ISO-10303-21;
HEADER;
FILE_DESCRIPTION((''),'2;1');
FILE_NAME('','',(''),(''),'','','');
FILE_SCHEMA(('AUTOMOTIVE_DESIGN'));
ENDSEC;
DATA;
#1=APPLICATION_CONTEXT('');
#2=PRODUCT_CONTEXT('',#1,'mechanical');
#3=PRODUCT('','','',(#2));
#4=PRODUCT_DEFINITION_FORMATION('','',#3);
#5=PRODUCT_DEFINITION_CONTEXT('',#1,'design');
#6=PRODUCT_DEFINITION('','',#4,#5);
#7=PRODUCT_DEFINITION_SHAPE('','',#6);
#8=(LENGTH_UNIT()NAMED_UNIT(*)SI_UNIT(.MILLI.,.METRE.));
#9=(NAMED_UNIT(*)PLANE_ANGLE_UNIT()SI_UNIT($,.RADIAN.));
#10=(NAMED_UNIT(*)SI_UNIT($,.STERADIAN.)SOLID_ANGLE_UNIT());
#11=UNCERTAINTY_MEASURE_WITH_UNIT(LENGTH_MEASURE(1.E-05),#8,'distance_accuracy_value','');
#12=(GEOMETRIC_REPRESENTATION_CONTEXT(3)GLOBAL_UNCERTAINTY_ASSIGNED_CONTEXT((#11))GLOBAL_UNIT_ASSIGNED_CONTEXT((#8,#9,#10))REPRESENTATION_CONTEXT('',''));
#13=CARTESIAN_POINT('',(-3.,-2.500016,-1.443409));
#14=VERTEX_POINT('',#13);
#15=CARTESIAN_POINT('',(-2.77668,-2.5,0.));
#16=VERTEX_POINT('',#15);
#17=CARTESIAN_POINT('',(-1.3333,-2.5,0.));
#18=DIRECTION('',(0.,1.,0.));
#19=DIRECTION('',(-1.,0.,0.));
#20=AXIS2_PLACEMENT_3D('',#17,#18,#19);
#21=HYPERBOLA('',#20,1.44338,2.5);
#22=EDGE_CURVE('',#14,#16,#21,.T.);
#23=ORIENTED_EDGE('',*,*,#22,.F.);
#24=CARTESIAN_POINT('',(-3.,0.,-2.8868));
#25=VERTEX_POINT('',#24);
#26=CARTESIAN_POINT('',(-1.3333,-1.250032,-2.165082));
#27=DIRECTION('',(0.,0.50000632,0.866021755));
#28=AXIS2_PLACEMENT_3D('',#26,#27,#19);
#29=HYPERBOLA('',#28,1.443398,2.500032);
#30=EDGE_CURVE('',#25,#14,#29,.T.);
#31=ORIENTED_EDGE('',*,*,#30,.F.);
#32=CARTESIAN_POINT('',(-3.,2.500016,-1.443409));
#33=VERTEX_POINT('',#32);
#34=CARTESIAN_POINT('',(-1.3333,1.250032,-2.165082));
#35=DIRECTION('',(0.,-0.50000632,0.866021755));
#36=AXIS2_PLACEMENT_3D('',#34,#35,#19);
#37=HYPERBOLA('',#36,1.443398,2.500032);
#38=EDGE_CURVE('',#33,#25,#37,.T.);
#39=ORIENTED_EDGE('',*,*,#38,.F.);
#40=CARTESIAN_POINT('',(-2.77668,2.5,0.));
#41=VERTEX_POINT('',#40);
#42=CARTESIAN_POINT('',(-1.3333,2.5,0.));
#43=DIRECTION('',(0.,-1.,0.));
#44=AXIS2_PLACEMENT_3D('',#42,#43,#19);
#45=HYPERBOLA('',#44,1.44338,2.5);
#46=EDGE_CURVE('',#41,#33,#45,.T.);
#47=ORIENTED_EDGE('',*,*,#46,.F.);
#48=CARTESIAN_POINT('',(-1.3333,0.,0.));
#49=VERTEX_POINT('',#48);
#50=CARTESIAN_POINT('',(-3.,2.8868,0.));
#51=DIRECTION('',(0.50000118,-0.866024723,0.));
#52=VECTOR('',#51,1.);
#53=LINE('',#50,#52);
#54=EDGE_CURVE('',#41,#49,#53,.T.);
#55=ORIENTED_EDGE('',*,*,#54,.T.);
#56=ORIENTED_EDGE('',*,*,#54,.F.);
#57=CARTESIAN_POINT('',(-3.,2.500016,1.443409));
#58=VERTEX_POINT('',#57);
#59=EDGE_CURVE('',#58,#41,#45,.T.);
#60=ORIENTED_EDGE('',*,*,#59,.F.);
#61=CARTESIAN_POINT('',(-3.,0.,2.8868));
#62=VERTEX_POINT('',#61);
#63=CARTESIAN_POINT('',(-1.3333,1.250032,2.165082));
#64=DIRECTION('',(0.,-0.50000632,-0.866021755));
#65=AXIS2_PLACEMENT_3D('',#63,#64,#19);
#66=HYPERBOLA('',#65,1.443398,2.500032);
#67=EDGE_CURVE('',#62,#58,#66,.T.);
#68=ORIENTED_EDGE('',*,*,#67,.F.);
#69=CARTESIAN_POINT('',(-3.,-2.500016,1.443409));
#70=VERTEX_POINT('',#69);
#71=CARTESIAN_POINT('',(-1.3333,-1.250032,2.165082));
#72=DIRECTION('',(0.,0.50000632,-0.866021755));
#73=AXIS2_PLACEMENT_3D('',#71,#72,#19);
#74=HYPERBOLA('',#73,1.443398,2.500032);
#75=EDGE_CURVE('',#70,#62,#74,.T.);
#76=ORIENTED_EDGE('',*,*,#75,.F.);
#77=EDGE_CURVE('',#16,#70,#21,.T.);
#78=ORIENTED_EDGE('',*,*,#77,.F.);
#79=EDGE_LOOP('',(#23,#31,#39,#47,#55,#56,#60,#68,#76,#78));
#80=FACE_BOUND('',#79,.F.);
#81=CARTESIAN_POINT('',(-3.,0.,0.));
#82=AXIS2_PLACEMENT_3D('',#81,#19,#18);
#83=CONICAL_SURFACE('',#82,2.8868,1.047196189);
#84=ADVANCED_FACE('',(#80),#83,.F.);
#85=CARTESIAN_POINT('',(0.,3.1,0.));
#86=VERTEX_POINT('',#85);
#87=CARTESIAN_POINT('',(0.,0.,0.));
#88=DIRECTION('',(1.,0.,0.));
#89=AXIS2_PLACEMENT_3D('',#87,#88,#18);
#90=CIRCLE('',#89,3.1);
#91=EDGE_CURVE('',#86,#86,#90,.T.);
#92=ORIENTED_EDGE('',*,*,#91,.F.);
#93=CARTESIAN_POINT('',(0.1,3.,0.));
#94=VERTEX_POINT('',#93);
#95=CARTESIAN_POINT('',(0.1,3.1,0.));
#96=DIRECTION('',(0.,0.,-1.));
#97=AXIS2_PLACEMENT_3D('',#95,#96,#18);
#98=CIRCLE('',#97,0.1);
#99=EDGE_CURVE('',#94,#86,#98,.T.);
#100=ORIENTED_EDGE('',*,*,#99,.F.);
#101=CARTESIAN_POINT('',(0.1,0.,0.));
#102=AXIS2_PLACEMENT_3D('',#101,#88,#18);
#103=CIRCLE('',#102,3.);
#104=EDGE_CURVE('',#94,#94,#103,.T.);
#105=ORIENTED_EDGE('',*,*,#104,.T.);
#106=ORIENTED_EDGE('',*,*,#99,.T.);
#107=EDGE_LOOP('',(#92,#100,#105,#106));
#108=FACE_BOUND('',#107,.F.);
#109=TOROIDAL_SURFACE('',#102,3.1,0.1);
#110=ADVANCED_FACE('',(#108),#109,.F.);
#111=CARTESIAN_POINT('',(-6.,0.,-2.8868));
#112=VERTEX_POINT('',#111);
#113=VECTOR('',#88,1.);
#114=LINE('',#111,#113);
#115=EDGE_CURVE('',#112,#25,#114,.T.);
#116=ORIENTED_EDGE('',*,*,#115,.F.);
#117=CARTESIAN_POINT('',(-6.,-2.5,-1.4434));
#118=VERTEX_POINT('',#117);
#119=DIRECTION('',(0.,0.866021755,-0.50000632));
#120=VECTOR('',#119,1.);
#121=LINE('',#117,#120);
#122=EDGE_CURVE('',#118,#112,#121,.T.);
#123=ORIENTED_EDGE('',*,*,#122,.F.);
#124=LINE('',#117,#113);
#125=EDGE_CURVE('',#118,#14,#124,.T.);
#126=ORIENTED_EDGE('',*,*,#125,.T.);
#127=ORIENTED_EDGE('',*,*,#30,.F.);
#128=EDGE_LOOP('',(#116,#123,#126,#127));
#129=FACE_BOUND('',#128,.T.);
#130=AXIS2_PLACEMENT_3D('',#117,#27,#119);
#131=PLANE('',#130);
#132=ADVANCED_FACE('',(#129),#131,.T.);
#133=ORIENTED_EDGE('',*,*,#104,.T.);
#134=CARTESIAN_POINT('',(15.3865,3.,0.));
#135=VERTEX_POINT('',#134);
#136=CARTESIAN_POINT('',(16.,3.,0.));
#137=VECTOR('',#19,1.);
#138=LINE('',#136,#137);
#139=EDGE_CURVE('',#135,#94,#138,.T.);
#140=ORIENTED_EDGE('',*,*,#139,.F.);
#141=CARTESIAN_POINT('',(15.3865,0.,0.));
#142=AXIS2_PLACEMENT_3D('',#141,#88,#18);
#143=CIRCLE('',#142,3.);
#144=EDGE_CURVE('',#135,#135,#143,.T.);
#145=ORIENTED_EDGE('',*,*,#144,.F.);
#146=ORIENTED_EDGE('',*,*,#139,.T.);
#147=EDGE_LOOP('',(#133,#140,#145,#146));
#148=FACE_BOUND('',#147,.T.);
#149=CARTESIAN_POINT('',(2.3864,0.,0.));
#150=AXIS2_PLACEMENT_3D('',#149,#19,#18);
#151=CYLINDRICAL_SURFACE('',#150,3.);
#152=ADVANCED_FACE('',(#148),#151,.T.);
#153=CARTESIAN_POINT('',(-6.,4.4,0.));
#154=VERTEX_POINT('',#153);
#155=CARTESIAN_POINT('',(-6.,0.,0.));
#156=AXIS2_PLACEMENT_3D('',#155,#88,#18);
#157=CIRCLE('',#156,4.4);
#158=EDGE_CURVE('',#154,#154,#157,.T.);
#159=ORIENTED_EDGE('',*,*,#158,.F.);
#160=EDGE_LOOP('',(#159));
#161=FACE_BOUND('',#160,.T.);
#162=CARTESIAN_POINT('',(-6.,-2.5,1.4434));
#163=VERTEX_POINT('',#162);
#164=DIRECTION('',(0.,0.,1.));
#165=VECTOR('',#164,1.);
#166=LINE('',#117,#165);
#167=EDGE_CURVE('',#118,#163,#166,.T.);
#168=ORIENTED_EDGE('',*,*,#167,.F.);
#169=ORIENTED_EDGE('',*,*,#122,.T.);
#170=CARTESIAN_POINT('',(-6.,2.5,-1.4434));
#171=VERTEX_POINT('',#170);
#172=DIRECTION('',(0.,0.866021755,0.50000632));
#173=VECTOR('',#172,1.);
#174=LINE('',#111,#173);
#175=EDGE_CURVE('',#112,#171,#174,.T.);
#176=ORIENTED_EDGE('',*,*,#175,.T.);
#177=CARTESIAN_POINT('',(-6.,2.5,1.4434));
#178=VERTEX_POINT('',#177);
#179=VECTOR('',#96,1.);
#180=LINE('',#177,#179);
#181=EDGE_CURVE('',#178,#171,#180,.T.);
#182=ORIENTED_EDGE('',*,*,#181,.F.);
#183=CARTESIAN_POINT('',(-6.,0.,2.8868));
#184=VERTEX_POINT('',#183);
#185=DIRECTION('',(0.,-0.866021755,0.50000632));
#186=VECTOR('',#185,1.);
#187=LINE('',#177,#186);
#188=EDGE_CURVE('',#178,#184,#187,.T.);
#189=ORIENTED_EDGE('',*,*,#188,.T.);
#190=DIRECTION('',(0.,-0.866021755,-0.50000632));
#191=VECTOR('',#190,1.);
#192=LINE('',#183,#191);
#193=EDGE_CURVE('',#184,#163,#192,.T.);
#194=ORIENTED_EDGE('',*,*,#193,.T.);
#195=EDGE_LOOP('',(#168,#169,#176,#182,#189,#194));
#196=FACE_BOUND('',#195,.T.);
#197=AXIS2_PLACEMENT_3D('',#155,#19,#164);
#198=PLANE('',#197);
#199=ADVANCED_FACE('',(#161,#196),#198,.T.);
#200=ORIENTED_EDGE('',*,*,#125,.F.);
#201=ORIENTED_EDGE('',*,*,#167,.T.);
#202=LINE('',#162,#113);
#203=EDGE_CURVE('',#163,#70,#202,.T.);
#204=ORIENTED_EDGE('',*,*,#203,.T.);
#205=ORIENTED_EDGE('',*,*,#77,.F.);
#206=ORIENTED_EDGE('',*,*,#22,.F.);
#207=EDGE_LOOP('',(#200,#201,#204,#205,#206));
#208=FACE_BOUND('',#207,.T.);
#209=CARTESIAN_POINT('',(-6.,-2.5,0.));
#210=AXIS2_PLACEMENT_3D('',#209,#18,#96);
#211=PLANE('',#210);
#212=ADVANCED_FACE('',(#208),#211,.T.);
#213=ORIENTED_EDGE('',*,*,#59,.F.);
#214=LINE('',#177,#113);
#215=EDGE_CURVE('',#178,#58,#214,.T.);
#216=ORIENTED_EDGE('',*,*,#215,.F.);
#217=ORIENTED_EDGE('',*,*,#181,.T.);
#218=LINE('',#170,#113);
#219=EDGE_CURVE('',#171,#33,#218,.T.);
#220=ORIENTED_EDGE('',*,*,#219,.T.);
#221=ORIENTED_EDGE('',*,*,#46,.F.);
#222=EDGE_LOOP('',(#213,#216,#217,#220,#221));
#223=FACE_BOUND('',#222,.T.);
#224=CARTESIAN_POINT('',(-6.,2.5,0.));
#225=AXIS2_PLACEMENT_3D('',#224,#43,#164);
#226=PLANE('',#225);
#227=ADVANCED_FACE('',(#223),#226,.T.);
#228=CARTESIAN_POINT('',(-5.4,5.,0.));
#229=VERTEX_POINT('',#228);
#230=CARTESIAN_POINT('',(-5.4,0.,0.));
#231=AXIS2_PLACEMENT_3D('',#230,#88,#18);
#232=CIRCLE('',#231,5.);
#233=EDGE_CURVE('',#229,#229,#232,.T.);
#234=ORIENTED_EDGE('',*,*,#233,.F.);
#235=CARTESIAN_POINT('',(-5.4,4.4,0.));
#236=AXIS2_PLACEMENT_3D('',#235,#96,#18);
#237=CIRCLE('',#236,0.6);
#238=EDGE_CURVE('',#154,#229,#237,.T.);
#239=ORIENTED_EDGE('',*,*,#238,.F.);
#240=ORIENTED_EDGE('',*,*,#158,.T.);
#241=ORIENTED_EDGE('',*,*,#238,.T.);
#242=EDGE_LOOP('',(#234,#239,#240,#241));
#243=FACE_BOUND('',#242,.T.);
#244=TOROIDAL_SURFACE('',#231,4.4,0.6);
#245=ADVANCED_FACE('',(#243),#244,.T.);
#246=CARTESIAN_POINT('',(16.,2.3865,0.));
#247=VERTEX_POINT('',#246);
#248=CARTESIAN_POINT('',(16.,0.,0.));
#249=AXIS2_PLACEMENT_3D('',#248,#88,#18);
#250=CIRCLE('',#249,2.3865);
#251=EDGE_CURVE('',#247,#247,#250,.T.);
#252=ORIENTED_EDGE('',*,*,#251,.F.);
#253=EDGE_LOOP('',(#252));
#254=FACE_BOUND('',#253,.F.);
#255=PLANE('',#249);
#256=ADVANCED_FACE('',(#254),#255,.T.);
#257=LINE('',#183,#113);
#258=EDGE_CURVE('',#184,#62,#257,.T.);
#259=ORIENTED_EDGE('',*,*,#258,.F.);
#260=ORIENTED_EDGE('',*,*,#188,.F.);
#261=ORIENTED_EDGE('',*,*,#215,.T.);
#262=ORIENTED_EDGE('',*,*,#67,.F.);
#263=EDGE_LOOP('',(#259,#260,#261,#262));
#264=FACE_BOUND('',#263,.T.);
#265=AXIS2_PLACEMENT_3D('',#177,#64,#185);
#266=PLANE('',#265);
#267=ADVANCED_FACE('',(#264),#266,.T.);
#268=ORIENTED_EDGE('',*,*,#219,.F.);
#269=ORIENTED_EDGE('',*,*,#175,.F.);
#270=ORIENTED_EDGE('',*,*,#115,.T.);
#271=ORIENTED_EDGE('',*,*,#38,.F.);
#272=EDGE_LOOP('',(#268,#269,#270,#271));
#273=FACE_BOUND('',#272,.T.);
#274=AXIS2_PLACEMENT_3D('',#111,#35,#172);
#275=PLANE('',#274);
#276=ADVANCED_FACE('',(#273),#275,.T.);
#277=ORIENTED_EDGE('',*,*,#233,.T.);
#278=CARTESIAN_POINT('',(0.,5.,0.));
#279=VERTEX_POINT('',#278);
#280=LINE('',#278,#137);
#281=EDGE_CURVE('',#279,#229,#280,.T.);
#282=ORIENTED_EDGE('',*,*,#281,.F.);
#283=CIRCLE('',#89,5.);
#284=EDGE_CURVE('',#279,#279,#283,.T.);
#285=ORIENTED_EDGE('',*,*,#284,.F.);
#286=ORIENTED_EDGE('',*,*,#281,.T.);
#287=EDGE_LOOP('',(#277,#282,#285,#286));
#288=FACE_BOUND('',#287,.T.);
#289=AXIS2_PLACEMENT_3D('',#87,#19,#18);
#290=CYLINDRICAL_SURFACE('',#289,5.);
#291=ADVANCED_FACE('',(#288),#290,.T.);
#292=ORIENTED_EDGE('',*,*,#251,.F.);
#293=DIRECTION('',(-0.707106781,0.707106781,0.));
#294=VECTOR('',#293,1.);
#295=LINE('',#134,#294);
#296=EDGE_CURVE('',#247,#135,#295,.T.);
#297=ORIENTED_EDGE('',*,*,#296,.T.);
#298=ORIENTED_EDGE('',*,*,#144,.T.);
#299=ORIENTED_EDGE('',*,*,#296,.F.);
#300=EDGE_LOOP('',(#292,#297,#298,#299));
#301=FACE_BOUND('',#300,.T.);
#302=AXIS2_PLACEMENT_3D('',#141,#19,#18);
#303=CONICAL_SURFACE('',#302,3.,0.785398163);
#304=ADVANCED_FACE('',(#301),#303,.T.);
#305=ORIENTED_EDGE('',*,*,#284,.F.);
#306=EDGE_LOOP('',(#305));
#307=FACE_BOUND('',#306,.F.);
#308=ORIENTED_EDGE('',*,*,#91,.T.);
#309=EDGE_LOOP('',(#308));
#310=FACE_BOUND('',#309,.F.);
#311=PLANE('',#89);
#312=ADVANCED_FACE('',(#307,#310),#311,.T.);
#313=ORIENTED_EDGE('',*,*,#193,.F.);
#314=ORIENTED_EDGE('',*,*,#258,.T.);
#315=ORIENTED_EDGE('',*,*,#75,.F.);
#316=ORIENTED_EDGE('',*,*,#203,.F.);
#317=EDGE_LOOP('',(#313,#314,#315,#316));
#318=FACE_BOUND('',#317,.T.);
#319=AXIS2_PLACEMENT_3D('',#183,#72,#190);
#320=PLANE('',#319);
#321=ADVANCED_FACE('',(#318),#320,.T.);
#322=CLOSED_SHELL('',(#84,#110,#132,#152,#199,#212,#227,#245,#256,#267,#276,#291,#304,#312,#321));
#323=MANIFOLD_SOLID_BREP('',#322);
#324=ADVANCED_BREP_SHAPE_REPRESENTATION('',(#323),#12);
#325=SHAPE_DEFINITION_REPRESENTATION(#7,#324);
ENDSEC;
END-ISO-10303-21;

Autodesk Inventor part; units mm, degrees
ref_plane "YZ Plane" through (0, 0, 0) normal (1, 0, 0) x (0, 1, 0)
ref_plane "XZ Plane" through (0, 0, 0) normal (0, 1, 0) x (-1, 0, 0)
sketch "Sketch1" plane through (0, 0, 0) normal (0, 0, 1) x (1, 0, 0)
  line L0 (-1.3333, 0) -> (16, 0)
  line L1 (16, 0) -> (16, 3)
  line L2 (16, 3) -> (3, 3)
  line L3 (3, 3) -> (2.3864, 3)
  line L4 (2.3864, 3) -> (0, 3)
  line L5 (0, 3) -> (0, 5)
  line L6 (0, 5) -> (-6, 5)
  line L7 (-6, 5) -> (-6, 2.8868)
  line L8 (-6, 2.8868) -> (-3, 2.8868)
  line L9 (-3, 2.8868) -> (-1.3333, 0)
  line L10 (-10.4, 0) -> (20.4, 0) projected
  line L11 (0, -1) -> (0, 6) projected
  line L12 (3, 3) -> (0, 3) construction
  dimension "d1" = 13
  dimension "d2" = 0.6136
  dimension "d3" = 6
  dimension "d4" = 3
  dimension "d5" = 60
  dimension "d6" = 6
  dimension "d7" = 6
  dimension "d8" = 5.7735
  dimension "d9" = 10
  dimension "d26" = 16
revolve "Body" add sketch "Sketch1" angle 360 about axis through (-1.3333, 0, 0) along (1, 0, 0)
sketch "Sketch2" plane through (-6, 0, 0) normal (-1, 0, 0) x (0, 0, 1)
  circle A0 centre (0, 0) radius 2.8868 projected
  line L0 (0, -7) -> (0, 7) projected
  line L1 (-7, 0) -> (7, 0) projected
  line L2 (2.8868, 0) -> (1.4434, -2.5)
  line L3 (1.4434, -2.5) -> (-1.4434, -2.5)
  line L4 (-1.4434, -2.5) -> (-2.8868, 0)
  line L5 (-2.8868, 0) -> (-1.4434, 2.5)
  line L6 (-1.4434, 2.5) -> (1.4434, 2.5)
  line L7 (1.4434, 2.5) -> (2.8868, 0)
extrude "Slot" add sketch "Sketch2" against normal up to next contours L7 A0 | A0 L2 | L6 L0 A0 | A0 L0 L3 | L0 L6 A0 | A0 L3 L0 | L4 A0 | A0 L5
fillet "Fillet1" radius 0.6 1 edges at (-6, -5, 0)
thread "Thread" size "M6x1" class "6g" standard "ISO Metric profile" length 13
chamfer "Chamfer1" distance 0.6135 distance2 0.6135 1 edges at (16, -3, 0) measured on face at (16, -1.1424, 0.935)
ref_plane "Work Plane1" through (29, 0, 0) normal (0, -1, 0) x (1, 0, 0)
fillet "Fillet2" radius 0.1 1 edges at (0, -3, 0)
equation "\"d30\" = R"
equation "\"d17\" = RR"
equation "\"d13\" = GEL"
equation "\"d15\" = -0.5 * SPD + 0.5 * GD"
equation "\"d16\" = GUL"
equation "\"d1\" = GEL"
equation "\"d3\" = KOH"
equation "\"d4\" = INTI"
equation "\"d6\" = GD"
equation "\"d7\" = BDM"
equation "\"d8\" = 1.1547 * SW"
equation "\"d9\" = KOD"
equation "\"d26\" = NLG"
equation "\"GD\" = NND"
equation "\"NLG\" = 16"
equation "\"GEL\" = 13"
equation "\"KOD\" = 10"
equation "\"KOH\" = 6"
equation "\"INTI\" = 3"
equation "\"GAL\" = 0.61345 * PTC"
equation "\"GUL\" = 0.61345 * PTC"
equation "\"BDM\" = NND"
equation "\"SW\" = 5"
equation "\"RR\" = 0.6"
equation "\"SPD\" = NND - 1.2269 * PTC"
equation "\"R\" = 0.1"
equation "\"PHH\" = 0.25"
equation "\"GD1\" = THREADDIA - 1.2269 * PTC"
equation "\"THREADDIA\" = 6"
equation "\"FAWI\" = 45deg"
equation "\"PTC\" = 1"
equation "\"NND\" = 6"
equation "\"TOA\" = 30deg"
equation "\"E0\" = 1.155 * SW"
properties part number "JIS B 1176 - M6 x 16" material "Steel, Mild"
